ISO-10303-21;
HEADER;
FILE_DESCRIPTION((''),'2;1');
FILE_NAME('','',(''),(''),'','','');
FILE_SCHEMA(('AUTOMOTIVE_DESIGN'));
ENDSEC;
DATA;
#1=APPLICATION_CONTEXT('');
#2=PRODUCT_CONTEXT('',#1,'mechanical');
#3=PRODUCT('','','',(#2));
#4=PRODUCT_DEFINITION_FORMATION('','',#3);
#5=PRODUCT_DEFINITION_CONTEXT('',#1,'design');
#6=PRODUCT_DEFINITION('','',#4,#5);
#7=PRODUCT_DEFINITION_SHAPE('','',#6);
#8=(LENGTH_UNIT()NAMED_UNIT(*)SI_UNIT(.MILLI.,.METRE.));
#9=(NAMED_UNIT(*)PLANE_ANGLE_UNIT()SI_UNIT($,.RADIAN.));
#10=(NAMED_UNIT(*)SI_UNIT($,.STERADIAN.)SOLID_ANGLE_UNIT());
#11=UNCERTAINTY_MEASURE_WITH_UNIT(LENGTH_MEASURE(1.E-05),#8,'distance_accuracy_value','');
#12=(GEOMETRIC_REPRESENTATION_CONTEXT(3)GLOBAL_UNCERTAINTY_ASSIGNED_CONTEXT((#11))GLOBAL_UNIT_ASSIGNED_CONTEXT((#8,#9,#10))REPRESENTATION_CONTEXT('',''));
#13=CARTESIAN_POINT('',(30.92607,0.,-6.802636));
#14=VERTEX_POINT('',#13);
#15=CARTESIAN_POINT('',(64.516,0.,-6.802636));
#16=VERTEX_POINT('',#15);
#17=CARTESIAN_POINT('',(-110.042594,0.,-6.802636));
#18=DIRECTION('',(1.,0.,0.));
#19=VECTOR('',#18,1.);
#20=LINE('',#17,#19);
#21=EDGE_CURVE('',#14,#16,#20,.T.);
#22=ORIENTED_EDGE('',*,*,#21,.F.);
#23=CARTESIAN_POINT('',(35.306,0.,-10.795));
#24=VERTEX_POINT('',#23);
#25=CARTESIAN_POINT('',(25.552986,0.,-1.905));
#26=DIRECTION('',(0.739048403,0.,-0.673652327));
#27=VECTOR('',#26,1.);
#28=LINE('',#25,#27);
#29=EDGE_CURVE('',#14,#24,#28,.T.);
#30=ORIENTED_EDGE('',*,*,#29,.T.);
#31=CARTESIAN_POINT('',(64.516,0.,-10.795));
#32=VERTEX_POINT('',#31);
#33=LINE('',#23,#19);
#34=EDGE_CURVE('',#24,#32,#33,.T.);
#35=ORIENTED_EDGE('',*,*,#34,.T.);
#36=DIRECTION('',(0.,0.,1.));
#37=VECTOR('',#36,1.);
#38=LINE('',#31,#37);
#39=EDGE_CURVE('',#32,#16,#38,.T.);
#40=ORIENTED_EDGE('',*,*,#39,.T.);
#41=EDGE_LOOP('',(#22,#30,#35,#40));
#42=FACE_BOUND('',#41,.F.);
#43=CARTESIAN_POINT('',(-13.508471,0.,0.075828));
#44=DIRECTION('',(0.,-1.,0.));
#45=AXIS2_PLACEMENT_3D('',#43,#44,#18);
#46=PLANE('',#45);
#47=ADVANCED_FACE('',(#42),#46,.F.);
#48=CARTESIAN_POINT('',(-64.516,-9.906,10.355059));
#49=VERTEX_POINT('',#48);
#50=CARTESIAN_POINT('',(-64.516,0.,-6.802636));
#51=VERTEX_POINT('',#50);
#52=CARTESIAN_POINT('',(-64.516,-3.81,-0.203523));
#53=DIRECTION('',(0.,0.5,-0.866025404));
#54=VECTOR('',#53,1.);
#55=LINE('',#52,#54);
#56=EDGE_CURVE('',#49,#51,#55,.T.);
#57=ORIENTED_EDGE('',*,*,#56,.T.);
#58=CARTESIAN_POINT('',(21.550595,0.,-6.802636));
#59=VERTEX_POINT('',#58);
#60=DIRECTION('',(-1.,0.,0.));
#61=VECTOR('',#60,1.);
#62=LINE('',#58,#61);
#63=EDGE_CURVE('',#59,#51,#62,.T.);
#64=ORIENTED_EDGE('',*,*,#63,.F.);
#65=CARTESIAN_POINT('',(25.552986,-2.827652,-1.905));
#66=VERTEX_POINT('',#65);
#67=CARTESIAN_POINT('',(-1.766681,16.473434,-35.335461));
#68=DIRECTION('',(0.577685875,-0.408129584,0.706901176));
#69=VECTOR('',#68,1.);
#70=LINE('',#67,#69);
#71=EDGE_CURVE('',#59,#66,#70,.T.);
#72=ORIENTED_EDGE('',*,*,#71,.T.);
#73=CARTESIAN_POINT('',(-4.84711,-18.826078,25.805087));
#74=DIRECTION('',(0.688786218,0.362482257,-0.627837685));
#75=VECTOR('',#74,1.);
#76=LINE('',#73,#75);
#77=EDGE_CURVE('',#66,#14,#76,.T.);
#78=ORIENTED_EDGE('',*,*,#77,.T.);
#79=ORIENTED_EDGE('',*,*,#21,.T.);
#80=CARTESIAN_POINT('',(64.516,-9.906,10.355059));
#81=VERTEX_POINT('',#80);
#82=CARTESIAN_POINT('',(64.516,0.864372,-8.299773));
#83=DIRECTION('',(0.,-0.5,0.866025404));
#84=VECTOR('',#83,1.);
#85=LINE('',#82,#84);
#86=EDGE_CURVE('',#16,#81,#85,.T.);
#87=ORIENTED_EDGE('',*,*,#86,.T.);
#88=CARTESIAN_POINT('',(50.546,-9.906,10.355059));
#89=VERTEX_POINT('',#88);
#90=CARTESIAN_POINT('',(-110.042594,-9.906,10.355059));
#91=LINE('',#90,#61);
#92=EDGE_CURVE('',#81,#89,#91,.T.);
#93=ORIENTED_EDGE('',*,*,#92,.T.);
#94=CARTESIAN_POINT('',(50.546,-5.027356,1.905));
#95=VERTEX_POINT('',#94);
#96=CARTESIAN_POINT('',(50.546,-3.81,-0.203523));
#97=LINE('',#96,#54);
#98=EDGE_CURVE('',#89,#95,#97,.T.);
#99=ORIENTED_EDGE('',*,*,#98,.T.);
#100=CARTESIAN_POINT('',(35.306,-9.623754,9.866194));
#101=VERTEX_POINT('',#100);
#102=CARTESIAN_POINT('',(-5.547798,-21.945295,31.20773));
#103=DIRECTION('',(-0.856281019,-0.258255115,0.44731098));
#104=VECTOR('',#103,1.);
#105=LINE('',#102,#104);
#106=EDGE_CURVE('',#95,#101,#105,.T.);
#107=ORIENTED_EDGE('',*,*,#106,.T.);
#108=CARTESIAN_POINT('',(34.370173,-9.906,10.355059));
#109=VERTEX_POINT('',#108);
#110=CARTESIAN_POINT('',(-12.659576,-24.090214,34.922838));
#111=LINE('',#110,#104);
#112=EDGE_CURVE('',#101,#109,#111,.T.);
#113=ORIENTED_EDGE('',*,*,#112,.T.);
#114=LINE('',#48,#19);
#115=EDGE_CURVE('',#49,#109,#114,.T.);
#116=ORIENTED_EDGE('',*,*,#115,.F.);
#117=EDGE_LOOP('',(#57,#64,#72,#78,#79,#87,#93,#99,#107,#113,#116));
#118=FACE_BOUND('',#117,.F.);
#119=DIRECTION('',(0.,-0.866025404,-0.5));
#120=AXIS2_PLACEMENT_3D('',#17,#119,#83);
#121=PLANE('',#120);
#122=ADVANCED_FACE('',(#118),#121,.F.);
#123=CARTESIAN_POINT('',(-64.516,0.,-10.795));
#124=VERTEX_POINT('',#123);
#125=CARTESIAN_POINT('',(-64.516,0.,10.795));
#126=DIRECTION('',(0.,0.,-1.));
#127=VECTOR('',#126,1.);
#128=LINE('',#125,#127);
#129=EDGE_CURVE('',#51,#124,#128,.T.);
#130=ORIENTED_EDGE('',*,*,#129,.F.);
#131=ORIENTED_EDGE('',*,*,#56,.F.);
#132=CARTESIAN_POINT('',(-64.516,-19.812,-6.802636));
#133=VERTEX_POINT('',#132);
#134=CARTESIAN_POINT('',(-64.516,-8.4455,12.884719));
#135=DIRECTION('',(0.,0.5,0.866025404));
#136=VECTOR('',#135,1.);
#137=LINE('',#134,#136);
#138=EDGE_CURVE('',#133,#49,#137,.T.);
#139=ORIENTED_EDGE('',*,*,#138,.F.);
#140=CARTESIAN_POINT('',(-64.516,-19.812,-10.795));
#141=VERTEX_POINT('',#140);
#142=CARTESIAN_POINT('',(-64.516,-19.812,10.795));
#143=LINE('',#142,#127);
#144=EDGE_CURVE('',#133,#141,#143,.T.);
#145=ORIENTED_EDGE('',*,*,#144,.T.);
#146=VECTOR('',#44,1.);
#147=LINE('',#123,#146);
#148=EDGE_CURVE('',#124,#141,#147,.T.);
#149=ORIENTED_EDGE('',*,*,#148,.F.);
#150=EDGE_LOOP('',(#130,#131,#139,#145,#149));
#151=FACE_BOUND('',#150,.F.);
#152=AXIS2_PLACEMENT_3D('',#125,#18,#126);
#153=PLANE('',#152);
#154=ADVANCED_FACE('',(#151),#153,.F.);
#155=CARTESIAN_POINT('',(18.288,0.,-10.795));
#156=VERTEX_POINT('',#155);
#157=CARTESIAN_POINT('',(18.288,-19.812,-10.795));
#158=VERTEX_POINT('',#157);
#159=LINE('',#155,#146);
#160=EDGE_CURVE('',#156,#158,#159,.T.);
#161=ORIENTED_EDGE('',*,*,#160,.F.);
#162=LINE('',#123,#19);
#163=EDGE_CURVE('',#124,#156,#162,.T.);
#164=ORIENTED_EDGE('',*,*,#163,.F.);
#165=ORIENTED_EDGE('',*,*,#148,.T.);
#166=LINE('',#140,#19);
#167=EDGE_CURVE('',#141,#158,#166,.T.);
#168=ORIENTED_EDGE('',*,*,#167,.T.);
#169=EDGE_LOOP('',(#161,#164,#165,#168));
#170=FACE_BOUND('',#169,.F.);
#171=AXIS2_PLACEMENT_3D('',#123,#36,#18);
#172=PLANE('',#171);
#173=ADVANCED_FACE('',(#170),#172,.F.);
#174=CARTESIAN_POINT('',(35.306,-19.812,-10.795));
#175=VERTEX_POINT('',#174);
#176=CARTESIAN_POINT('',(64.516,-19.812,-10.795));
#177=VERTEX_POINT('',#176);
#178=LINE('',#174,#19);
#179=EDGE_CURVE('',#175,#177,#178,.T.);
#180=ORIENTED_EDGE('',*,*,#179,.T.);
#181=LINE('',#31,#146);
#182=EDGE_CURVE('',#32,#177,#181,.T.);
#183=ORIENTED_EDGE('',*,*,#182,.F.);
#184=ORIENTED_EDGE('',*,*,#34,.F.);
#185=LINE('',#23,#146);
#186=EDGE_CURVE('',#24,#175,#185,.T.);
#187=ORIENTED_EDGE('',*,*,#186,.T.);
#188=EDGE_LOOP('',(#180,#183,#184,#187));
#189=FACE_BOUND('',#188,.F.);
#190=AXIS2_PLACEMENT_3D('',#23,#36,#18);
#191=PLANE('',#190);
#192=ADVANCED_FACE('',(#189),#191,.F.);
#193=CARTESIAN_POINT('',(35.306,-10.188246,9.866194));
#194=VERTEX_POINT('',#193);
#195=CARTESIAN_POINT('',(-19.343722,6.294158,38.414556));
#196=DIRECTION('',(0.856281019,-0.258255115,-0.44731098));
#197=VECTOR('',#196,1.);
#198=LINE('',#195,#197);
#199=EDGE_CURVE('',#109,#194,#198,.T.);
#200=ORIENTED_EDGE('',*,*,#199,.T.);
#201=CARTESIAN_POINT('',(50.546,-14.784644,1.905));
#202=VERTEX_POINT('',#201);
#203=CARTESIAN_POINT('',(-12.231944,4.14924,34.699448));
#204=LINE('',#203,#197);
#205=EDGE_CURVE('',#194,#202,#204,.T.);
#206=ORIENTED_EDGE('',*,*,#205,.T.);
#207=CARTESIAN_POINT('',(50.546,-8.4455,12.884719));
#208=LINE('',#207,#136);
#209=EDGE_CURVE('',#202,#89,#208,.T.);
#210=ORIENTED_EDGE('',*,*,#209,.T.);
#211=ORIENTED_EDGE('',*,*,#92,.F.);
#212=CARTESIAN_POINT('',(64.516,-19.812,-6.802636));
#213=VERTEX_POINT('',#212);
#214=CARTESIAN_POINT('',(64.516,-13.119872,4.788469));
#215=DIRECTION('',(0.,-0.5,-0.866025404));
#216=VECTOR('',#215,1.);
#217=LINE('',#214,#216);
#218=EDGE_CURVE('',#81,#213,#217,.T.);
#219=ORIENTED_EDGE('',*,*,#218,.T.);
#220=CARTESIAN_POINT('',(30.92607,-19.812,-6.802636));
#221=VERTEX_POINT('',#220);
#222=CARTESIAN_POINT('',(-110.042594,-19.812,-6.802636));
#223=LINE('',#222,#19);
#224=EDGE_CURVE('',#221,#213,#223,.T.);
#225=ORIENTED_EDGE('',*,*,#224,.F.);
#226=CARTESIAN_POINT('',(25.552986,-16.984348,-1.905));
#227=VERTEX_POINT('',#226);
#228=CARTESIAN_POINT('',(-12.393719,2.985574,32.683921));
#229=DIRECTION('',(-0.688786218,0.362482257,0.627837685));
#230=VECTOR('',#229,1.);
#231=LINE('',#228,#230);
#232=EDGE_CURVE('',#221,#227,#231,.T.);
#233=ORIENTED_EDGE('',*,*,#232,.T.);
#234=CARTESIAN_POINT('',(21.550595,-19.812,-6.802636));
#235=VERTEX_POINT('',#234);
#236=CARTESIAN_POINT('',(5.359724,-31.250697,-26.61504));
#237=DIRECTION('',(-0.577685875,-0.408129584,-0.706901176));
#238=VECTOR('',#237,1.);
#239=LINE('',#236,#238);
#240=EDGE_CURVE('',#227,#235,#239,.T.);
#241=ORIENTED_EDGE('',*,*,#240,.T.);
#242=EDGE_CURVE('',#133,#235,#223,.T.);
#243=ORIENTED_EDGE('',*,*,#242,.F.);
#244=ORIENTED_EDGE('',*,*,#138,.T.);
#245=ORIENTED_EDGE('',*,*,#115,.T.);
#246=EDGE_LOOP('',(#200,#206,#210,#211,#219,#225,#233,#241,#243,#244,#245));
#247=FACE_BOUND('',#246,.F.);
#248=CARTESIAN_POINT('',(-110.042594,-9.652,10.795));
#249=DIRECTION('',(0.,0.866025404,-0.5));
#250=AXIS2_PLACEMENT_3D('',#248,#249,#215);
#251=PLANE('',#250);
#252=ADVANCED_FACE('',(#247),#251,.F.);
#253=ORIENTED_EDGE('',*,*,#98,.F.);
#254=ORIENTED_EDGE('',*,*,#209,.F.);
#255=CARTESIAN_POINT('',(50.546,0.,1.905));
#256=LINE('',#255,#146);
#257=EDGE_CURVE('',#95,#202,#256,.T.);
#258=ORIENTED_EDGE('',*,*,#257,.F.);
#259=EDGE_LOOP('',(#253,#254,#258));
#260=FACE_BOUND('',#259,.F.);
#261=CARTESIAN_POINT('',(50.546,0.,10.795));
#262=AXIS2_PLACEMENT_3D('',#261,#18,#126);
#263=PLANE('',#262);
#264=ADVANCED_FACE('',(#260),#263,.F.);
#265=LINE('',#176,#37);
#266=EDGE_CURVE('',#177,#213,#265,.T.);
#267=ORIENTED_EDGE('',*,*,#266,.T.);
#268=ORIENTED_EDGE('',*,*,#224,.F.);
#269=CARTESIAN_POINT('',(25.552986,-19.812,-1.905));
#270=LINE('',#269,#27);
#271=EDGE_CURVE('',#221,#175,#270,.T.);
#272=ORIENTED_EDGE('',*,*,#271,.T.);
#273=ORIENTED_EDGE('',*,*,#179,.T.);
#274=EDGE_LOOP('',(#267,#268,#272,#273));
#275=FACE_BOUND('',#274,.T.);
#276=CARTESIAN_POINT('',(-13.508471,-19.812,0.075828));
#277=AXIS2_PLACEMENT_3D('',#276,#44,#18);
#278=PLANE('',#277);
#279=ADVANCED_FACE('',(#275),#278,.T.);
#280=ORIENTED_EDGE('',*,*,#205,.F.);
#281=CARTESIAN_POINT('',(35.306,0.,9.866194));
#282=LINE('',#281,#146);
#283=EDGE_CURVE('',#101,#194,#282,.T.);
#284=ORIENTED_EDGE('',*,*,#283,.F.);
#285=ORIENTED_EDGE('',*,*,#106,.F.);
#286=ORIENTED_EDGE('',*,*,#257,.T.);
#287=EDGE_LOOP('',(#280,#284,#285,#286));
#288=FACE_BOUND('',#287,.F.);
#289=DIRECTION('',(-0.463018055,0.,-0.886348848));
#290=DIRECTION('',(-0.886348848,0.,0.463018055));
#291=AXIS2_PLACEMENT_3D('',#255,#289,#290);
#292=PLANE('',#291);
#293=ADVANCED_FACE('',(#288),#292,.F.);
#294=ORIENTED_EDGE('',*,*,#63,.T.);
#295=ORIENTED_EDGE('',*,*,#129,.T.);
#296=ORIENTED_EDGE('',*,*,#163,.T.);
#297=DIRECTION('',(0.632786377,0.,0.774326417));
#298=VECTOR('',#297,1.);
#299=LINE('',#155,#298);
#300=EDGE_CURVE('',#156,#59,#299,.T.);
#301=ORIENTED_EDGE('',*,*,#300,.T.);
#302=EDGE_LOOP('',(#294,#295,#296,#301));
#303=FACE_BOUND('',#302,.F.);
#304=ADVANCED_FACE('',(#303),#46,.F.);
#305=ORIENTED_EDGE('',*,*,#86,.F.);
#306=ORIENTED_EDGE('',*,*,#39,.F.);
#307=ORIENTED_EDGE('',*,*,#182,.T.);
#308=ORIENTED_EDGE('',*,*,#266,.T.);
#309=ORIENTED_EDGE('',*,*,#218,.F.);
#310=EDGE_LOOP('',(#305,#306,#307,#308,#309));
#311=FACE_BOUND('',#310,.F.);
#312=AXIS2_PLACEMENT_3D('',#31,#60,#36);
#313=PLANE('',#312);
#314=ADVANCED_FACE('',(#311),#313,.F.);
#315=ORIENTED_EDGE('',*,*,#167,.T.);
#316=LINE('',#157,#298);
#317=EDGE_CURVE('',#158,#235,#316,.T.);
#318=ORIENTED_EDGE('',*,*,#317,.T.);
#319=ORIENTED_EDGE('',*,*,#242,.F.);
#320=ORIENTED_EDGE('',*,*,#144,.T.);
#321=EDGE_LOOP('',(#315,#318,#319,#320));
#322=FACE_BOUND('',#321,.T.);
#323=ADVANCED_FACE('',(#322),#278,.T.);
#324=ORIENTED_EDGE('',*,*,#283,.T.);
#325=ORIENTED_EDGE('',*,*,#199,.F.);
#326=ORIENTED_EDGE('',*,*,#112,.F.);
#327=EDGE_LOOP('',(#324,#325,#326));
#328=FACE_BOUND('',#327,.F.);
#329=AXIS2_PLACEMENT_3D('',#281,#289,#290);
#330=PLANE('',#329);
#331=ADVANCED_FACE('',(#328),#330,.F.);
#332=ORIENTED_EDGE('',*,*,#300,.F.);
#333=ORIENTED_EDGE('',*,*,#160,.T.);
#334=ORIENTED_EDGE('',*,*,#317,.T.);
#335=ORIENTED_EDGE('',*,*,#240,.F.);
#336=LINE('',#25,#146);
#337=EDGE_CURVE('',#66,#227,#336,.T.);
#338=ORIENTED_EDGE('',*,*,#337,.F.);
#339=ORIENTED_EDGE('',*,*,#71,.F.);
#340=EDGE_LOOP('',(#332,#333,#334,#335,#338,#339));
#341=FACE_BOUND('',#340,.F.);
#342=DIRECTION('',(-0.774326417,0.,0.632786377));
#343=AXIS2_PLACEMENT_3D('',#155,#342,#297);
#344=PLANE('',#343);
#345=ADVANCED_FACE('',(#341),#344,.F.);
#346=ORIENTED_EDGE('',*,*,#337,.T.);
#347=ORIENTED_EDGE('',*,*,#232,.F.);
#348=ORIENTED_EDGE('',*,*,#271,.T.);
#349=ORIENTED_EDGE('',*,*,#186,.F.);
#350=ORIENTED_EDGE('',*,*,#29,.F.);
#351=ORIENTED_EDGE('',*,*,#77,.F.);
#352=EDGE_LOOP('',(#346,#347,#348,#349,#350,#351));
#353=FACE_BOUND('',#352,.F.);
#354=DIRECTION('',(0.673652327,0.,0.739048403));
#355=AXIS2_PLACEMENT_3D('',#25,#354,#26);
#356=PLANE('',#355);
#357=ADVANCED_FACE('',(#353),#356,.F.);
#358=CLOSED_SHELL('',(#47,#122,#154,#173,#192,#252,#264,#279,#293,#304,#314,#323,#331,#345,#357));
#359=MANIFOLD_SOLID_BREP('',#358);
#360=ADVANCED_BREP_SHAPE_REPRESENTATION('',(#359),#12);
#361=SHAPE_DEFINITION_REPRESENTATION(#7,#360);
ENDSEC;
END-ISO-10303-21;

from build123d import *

# Parameters (mm, degrees)
F1_DEPTH    = 19.812
F2_T1_DEPTH = 189.0971878823
F3_T1_DEPTH = 189.0971878823
F3_T3_DEPTH = 105.0231878823


# Not quite as in the source:
# - a fillet or chamfer that OpenCascade refuses, or shapes differently, is made with other operations: its cross-section is extruded or revolved along the edge and cut away or added


with BuildPart() as f1:
    # F0 (on Front) → F1 (new body)
    with BuildSketch(Plane.XZ):
        Polygon((35.306, 9.8661940299), (33.528, 10.795), (-64.516, 10.795), (-64.516, -10.795), (18.288, -10.795), (25.5529864014, -1.905), (35.306, -10.795), align=None)
        Polygon((50.546, -10.795), (50.546, 1.905), (35.306, 9.8661940299), (35.306, -10.795), align=None)
        Polygon((64.516, -10.795), (64.516, 10.795), (50.546, 10.795), (50.546, 1.905), (50.546, -10.795), align=None)
    extrude(amount=F1_DEPTH)

    # F2: chamfer of 10.16 x 17.5976362049 on 1 edges, made by hand

    # F2_s2 → F2_t1 (cut)
    with BuildSketch(Plane.YZ.offset(-110.0425939411)):
        Polygon((-9.652, 10.795), (-19.812, -6.8026362049), (-19.812, 10.795), align=None)
    extrude(amount=F2_T1_DEPTH, mode=Mode.SUBTRACT)

    # F3: chamfer of 10.16 x 17.5976362049 on 2 edges, made by hand

    # F3_s2 → F3_t1 (cut)
    with BuildSketch(Plane.YZ.offset(-110.0425939411)):
        Polygon((0, -6.8026362049), (-10.16, 10.795), (0, 10.795), align=None)
    extrude(amount=F3_T1_DEPTH, mode=Mode.SUBTRACT)

    # F3_s4 → F3_t3 (cut)
    with BuildSketch(Plane.YZ.offset(5.0194060589)):
        Polygon((0, -6.8026362049), (-10.16, 10.795), (0, 10.795), align=None)
    extrude(amount=F3_T3_DEPTH, mode=Mode.SUBTRACT)


solid = f1.part
